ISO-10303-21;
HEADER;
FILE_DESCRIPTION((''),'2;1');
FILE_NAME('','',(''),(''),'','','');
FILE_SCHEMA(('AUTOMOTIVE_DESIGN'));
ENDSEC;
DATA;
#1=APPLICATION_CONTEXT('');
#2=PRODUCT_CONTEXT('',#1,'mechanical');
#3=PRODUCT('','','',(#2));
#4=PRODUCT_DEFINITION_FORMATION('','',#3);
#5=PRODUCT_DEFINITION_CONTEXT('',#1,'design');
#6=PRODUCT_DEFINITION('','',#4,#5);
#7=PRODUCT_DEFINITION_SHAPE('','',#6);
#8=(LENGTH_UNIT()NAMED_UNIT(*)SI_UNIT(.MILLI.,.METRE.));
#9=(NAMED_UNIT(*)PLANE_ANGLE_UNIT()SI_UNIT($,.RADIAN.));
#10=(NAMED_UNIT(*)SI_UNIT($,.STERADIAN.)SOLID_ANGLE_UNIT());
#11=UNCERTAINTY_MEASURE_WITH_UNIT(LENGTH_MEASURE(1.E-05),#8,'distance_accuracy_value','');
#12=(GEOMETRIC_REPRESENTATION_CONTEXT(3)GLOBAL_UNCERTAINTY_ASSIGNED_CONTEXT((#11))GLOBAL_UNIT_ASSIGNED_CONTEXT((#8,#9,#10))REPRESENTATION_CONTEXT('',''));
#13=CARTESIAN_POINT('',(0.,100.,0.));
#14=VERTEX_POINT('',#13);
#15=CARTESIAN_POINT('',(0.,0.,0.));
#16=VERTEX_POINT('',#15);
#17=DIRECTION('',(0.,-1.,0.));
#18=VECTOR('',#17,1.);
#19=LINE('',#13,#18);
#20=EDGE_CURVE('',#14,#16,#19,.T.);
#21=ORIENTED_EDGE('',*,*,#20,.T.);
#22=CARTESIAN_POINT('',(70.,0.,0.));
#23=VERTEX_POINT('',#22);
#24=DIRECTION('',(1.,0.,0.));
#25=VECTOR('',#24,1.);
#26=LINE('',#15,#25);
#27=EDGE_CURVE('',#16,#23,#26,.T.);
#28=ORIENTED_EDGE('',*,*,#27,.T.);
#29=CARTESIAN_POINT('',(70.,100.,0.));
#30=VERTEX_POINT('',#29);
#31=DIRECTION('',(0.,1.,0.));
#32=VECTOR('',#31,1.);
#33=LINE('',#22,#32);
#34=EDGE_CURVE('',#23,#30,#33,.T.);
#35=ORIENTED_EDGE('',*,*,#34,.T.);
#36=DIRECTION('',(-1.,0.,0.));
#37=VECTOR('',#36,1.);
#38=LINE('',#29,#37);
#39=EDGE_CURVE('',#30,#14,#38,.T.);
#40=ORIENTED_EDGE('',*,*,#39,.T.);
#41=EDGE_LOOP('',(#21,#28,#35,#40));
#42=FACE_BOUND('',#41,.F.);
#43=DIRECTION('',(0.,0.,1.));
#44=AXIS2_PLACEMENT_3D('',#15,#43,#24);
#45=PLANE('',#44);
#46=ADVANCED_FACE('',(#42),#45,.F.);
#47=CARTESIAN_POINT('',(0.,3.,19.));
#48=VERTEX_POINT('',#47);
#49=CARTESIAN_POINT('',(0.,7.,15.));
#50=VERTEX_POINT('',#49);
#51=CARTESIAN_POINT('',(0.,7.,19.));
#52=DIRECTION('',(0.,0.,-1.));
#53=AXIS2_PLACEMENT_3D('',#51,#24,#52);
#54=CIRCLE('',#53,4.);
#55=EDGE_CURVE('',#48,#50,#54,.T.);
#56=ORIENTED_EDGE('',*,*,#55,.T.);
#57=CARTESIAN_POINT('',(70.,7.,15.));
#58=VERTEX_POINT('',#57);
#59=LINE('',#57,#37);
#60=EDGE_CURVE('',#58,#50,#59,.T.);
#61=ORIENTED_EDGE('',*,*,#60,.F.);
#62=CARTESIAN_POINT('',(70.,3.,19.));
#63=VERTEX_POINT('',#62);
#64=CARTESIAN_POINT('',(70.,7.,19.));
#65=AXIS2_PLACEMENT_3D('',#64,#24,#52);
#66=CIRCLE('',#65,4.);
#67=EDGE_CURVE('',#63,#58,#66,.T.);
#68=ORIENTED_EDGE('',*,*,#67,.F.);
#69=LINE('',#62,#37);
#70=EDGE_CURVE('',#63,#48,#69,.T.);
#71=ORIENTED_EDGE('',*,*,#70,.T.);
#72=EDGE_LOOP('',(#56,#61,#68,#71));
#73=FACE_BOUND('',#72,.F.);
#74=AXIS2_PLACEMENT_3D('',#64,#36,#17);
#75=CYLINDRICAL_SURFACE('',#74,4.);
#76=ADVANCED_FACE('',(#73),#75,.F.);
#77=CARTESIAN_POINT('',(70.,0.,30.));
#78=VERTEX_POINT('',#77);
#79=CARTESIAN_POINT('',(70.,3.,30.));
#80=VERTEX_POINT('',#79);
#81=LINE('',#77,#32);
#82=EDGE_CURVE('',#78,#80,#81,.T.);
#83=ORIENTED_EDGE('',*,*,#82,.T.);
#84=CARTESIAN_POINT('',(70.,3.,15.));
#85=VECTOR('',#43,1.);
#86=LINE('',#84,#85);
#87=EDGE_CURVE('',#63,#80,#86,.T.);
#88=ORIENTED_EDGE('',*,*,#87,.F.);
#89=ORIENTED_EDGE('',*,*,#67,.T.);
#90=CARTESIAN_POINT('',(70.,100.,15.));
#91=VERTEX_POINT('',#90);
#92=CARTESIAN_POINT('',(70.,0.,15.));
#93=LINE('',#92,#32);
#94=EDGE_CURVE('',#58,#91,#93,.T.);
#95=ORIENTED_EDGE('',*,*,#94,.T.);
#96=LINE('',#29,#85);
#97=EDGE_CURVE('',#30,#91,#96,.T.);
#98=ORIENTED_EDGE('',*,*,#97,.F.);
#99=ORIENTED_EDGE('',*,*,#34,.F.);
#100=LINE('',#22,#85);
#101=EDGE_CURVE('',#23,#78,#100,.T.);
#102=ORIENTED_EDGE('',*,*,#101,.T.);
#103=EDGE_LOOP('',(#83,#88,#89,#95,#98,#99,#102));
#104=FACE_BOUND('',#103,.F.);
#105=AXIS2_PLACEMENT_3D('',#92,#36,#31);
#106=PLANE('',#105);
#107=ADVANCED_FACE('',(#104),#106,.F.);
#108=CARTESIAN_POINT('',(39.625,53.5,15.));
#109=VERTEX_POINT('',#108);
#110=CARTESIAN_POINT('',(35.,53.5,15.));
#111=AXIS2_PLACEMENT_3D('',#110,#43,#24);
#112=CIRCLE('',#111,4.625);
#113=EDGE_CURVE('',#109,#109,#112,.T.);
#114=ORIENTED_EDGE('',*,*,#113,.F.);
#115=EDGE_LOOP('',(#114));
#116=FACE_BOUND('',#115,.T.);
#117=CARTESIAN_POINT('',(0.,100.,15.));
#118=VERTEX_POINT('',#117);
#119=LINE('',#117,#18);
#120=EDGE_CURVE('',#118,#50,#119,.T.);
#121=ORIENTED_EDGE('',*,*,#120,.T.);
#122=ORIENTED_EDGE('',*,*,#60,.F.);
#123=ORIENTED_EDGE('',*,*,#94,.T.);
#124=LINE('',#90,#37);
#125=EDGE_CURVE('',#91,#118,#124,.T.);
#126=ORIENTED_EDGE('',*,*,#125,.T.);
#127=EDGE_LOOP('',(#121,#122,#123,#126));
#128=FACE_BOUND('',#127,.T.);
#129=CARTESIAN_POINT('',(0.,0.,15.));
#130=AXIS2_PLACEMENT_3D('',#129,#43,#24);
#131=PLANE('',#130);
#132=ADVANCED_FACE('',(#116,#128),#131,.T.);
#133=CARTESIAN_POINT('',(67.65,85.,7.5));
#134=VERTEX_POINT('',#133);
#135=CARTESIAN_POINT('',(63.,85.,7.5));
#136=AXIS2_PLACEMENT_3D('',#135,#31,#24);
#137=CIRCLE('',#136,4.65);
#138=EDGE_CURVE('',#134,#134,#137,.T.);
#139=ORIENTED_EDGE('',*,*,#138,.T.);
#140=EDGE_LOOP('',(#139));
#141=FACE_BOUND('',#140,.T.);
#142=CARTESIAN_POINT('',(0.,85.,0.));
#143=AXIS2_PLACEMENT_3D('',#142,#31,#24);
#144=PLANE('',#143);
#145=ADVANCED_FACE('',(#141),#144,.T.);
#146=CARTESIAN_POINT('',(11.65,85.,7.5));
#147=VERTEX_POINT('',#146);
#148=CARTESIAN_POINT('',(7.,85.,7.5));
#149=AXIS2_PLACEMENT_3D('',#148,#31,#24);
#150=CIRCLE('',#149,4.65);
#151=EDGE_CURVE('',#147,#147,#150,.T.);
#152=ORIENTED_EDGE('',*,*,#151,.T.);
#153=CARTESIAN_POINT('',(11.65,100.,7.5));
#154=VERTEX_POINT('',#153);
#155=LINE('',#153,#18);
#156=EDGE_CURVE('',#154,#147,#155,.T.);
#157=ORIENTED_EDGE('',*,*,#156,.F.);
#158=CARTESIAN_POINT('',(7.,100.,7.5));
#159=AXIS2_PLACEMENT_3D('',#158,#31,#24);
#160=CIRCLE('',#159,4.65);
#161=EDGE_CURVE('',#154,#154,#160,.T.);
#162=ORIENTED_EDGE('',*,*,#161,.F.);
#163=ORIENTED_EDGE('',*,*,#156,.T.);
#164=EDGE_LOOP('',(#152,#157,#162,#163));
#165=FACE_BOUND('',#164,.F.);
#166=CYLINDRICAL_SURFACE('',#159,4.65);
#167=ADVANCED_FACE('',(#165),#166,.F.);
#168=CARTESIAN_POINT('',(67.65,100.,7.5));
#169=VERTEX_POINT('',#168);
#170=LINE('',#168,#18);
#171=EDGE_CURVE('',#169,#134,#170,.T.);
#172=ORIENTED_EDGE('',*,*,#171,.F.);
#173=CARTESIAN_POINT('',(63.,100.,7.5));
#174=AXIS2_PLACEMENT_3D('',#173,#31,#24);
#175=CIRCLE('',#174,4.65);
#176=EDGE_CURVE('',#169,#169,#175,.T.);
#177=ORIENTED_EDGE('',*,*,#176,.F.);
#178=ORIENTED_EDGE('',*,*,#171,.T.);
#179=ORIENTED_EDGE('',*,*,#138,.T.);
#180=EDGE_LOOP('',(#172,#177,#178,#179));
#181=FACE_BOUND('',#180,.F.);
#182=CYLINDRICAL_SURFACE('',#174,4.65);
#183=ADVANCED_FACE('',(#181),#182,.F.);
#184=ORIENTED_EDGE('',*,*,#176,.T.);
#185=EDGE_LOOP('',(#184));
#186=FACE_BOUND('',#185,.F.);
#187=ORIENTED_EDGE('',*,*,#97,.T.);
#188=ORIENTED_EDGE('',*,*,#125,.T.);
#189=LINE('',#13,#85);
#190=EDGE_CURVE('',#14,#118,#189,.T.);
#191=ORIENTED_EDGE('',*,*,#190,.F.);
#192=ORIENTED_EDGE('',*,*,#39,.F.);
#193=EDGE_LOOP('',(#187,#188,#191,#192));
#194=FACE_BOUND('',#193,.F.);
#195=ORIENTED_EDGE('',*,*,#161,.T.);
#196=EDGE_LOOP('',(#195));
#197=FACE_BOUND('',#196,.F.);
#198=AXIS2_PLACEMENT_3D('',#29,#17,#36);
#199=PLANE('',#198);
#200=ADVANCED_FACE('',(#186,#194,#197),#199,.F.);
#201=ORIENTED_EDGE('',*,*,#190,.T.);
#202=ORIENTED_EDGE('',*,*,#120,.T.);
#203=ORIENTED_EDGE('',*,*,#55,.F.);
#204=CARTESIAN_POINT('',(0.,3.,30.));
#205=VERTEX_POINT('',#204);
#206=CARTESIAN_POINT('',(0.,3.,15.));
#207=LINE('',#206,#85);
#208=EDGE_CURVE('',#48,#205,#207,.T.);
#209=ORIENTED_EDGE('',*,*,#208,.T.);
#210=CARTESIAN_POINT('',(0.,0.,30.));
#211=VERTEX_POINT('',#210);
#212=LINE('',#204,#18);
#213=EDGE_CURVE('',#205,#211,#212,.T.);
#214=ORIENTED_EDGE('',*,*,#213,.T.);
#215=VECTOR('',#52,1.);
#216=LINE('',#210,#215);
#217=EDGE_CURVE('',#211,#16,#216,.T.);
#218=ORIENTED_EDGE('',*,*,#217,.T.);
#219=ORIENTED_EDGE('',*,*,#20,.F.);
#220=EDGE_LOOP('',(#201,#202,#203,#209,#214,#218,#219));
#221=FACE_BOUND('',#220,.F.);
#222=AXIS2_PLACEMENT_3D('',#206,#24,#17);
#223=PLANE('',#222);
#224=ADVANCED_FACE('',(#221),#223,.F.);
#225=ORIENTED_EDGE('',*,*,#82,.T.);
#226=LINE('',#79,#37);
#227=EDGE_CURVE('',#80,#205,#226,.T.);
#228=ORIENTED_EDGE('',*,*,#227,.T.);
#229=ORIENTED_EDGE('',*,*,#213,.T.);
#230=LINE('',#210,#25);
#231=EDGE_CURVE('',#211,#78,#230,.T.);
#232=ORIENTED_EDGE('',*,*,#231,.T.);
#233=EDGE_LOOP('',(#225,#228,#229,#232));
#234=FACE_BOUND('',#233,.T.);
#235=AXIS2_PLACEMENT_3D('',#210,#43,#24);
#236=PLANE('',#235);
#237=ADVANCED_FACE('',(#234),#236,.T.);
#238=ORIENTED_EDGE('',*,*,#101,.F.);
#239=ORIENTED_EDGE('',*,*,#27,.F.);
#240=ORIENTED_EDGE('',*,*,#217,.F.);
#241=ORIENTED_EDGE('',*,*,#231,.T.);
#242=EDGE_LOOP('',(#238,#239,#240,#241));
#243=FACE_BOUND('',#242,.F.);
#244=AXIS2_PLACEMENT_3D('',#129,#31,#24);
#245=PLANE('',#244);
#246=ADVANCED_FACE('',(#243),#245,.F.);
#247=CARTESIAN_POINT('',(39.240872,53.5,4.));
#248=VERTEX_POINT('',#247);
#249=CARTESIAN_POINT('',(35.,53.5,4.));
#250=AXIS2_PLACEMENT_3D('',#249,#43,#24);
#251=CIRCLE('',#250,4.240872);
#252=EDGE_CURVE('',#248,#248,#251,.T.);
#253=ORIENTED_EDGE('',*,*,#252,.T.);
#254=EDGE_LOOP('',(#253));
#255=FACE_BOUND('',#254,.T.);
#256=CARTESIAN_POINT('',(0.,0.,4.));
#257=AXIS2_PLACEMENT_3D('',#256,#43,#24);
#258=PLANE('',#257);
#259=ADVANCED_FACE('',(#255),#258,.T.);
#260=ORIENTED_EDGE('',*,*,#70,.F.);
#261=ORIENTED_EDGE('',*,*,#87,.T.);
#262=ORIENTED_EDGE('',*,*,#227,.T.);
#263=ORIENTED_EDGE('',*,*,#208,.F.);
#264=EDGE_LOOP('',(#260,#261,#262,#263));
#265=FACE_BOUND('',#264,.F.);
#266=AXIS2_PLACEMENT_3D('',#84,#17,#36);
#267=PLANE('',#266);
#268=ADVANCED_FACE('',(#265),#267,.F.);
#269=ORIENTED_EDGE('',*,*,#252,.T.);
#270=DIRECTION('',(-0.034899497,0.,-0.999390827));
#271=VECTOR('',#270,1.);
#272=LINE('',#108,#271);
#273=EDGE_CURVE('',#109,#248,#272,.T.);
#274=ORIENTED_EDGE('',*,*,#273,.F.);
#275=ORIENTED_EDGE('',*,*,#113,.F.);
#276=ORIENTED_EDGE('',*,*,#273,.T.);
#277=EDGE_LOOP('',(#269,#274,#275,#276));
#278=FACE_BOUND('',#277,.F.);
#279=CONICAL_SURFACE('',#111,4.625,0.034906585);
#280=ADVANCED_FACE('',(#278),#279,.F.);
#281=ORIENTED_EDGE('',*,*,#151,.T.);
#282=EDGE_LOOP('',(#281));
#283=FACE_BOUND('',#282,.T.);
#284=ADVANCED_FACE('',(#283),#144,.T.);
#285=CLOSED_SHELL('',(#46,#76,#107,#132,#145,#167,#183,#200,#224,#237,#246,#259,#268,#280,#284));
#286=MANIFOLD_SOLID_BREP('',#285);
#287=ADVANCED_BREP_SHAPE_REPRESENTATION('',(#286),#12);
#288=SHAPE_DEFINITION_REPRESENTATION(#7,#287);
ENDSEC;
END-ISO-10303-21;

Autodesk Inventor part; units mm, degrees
ref_plane "YZ Plane" through (0, 0, 0) normal (1, 0, 0) x (0, 1, 0)
ref_plane "XZ Plane" through (0, 0, 0) normal (0, 1, 0) x (-1, 0, 0)
ref_plane "XY Plane" through (0, 0, 0) normal (0, 0, 1) x (1, 0, 0)
sketch "Sketch1" plane through (0, 0, 0) normal (0, 0, 1) x (1, 0, 0)
  line L0 (0, 0) -> (70, 0)
  line L1 (70, 0) -> (70, 100)
  line L2 (70, 100) -> (0, 100)
  line L3 (0, 100) -> (0, 0)
  dimension "d0" = 70
  dimension "d1" = 100
extrude "Extrusion1" add sketch "Sketch1" along normal blind 15
sketch "Sketch3" plane through (0, 100, 0) normal (0, 1, 0) x (1, 0, 0)
  line L0 (0, 0) -> (0, -15) projected
  line L1 (0, -7.5) -> (70, -7.5) construction
  line L2 (70, 0) -> (70, -15) projected
  circle A0 centre (7, -7.5) radius 4.65
  circle A1 centre (63, -7.5) radius 4.65
  dimension "d7" = 9.3
  dimension "d8" = 9.3
  dimension "d9" = 56
  dimension "d10" = 70
  dimension "d11" = 7
extrude "Extrusion3" cut sketch "Sketch3" against normal blind 15
sketch "Sketch4" plane through (0, 0, 15) normal (0, 0, 1) x (1, 0, 0)
  line L0 (70, 0) -> (70, 100) projected
  line L1 (0, 0) -> (70, 0)
  line L2 (70, 0) -> (70, 3)
  line L3 (70, 3) -> (0, 3)
  line L4 (0, 3) -> (0, 0)
  dimension "d14" = 3
extrude "Extrusion4" add sketch "Sketch4" along normal blind 15
fillet "Fillet1" radius 4 1 edges at (35, 3, 15)
sketch "Sketch5" plane through (0, 0, 15) normal (0, 0, 1) x (1, 0, 0)
  line L0 (70, 0) -> (70, 100) projected
  line L1 (0, 0) -> (70, 0) projected
  line L2 (0, 100) -> (0, 0) projected
  line L3 (70, 100) -> (0, 100) projected
  circle A0 centre (35, 53.5) radius 4.625
  line L4 (70, 100) -> (0, 100) projected
  line L5 (35, 100) -> (35, 0)
  line L6 (0, 0) -> (70, 0) projected
  line L7 (70, 7) -> (70, 100) projected
  line L8 (70, 53.5) -> (0, 53.5)
  line L9 (0, 100) -> (0, 7) projected
  dimension "d18" = 9.25
sketch "Sketch5 outline for Extrusion5" plane through (0, 0, 15) normal (0, 0, 1) x (1, 0, 0)
  circle A0 centre (35, 53.5) radius 4.625
extrude "Extrusion5" cut sketch "Sketch5 outline for Extrusion5" against normal blind 11 draft -2
equation "\"d8\" = d7"
equation "\"d11\" = -0.5 * d9 + 0.5 * d10"
properties part number "antenna_mast_mount"
